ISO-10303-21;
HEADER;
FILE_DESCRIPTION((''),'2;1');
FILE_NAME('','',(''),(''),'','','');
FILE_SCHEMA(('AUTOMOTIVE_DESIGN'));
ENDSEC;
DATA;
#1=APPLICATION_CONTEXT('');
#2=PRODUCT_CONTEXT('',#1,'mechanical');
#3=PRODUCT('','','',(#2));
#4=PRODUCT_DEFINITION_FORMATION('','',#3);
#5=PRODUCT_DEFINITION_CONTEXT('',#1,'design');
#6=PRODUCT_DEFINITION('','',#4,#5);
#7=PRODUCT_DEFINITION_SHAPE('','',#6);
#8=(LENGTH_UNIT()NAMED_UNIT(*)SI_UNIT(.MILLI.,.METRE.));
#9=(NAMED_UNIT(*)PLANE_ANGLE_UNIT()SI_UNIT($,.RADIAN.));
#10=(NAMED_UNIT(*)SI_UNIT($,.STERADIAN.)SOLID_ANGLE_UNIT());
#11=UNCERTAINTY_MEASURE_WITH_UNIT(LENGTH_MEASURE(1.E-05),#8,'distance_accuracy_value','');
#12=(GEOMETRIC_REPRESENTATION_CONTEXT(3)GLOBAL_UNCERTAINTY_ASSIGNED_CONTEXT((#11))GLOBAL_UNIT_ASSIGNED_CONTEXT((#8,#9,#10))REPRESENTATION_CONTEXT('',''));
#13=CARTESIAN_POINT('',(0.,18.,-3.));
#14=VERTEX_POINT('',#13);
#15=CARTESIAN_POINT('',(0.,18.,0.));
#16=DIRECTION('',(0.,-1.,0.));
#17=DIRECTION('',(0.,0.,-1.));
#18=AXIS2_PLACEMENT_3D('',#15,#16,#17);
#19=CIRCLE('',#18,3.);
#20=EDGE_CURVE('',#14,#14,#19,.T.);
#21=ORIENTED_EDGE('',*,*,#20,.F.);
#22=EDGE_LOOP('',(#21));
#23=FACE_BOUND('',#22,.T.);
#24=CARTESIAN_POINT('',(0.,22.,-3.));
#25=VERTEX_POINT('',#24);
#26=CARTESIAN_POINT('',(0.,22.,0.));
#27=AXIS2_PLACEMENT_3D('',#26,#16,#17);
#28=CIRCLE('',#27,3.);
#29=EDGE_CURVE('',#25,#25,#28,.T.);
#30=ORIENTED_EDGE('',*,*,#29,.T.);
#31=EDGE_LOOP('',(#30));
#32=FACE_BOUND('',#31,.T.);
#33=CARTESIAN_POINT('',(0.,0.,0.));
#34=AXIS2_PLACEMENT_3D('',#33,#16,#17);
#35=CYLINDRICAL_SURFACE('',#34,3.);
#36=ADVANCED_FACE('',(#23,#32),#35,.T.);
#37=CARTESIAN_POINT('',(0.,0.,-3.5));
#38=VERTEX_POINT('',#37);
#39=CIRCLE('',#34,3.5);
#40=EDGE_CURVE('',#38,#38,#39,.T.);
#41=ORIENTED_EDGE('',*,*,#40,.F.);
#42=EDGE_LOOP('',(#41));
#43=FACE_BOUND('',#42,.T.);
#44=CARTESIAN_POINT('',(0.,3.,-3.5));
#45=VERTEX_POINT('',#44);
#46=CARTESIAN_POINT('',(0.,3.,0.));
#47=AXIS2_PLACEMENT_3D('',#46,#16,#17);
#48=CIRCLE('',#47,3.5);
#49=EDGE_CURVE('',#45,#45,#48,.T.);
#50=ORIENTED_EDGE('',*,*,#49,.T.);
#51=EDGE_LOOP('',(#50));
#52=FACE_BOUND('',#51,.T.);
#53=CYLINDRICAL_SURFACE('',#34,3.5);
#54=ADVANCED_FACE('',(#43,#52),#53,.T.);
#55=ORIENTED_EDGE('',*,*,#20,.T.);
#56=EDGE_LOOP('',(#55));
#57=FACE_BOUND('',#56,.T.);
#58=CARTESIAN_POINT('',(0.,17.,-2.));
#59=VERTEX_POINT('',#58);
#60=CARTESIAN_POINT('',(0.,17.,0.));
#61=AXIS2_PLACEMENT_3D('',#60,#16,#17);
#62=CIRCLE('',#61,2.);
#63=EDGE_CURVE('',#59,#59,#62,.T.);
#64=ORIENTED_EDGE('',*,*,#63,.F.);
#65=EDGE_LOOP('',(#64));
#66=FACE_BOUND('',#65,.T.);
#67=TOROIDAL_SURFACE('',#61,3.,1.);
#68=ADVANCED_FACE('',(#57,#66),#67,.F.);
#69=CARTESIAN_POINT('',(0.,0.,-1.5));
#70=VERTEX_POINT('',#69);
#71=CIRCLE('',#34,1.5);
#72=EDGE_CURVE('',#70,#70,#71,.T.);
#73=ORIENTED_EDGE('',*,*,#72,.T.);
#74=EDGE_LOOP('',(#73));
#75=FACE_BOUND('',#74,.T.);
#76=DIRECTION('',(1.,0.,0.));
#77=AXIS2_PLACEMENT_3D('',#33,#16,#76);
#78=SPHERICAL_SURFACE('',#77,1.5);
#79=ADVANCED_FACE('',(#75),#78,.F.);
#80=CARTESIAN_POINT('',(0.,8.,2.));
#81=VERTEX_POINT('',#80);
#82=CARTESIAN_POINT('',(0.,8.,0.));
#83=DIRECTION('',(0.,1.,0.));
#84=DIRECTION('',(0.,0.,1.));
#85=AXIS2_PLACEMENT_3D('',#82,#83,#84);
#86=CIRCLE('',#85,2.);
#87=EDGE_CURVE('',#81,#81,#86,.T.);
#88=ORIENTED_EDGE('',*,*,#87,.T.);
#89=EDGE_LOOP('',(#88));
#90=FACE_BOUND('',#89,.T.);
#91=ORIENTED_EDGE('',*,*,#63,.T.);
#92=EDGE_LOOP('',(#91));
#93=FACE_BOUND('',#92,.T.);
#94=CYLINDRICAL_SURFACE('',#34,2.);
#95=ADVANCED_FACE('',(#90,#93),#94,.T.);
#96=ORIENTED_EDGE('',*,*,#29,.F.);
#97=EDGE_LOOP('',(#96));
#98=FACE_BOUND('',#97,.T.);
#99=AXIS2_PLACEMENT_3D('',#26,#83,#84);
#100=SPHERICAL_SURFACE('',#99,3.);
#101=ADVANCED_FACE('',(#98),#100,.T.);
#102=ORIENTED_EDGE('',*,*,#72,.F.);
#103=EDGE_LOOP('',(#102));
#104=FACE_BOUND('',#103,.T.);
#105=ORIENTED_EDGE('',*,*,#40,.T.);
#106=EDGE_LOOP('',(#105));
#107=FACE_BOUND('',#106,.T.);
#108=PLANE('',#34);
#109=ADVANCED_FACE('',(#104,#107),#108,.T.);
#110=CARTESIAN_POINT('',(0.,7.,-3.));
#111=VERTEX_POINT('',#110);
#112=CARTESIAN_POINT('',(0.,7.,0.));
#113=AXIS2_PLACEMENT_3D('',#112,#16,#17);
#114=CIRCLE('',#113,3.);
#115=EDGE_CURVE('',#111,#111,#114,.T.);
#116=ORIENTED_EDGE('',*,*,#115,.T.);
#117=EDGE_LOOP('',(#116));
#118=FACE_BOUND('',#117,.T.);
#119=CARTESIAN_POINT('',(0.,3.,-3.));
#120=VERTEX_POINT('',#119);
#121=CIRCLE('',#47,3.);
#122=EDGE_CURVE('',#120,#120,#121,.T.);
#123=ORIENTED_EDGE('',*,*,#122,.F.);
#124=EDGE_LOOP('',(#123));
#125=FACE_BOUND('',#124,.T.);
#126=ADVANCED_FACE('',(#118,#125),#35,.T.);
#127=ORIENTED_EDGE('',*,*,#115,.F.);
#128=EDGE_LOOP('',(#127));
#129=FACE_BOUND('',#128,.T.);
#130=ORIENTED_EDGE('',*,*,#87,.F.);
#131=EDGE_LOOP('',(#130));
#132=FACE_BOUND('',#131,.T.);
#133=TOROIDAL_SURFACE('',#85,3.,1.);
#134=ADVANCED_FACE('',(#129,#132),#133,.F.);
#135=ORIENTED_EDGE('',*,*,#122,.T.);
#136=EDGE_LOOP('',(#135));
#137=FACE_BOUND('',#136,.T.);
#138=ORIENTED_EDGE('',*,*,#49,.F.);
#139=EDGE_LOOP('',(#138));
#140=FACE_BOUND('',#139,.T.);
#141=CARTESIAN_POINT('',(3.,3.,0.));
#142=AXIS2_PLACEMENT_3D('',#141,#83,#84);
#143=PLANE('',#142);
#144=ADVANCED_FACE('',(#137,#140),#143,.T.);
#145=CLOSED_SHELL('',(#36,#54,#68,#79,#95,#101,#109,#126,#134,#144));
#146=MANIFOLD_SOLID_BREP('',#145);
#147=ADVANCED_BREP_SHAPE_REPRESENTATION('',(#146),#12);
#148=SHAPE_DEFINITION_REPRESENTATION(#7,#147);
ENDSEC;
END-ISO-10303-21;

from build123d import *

# Parameters (mm, degrees)
FILLET1_R = 3
FILLET2_R = 1


with BuildPart() as part:
    # Sketch1 → Revolve1 (revolve)
    with BuildSketch(Plane.XY, mode=Mode.PRIVATE) as revolve1_sk:
        Polygon((3, 18), (2, 18), (2, 7), (3, 7), (3, 3), (3.5, 3), (3.5, 0), (0, 0), (0, 25), (3, 25), align=None)
    revolve(revolve1_sk.sketch.rotate(Axis((0, 0, 0), (0, 1, 0)), 90), axis=Axis((0, 0, 0), (0, 1, 0)))

    # Fillet1
    fillet1_edges = [part.edges().sort_by_distance(p)[0] for p in [
        (0, 25, 3),
    ]]
    fillet(fillet1_edges, radius=FILLET1_R)

    # Fillet2
    fillet2_edges = [part.edges().sort_by_distance(p)[0] for p in [
        (0, 7, 2),
        (0, 18, 2),
    ]]
    fillet(fillet2_edges, radius=FILLET2_R - 0.0001)  # a hair under: the kernel refuses the full size

    # Sketch2 → Cut-Revolve1 (revolve, cut)
    with BuildSketch(Plane.XY, mode=Mode.PRIVATE) as cut_revolve1_sk:
        with BuildLine():
            Line((0, 0), (0, 1.5))
            ThreePointArc((0, 1.5), (1.060660172, 1.060660172), (1.5, 0))
            Line((1.5, 0), (0, 0))
        make_face()
    revolve(cut_revolve1_sk.sketch.rotate(Axis((0, 0, 0), (0, 1, 0)), 90), axis=Axis((0, 0, 0), (0, 1, 0)), mode=Mode.SUBTRACT)


solid = part.part
